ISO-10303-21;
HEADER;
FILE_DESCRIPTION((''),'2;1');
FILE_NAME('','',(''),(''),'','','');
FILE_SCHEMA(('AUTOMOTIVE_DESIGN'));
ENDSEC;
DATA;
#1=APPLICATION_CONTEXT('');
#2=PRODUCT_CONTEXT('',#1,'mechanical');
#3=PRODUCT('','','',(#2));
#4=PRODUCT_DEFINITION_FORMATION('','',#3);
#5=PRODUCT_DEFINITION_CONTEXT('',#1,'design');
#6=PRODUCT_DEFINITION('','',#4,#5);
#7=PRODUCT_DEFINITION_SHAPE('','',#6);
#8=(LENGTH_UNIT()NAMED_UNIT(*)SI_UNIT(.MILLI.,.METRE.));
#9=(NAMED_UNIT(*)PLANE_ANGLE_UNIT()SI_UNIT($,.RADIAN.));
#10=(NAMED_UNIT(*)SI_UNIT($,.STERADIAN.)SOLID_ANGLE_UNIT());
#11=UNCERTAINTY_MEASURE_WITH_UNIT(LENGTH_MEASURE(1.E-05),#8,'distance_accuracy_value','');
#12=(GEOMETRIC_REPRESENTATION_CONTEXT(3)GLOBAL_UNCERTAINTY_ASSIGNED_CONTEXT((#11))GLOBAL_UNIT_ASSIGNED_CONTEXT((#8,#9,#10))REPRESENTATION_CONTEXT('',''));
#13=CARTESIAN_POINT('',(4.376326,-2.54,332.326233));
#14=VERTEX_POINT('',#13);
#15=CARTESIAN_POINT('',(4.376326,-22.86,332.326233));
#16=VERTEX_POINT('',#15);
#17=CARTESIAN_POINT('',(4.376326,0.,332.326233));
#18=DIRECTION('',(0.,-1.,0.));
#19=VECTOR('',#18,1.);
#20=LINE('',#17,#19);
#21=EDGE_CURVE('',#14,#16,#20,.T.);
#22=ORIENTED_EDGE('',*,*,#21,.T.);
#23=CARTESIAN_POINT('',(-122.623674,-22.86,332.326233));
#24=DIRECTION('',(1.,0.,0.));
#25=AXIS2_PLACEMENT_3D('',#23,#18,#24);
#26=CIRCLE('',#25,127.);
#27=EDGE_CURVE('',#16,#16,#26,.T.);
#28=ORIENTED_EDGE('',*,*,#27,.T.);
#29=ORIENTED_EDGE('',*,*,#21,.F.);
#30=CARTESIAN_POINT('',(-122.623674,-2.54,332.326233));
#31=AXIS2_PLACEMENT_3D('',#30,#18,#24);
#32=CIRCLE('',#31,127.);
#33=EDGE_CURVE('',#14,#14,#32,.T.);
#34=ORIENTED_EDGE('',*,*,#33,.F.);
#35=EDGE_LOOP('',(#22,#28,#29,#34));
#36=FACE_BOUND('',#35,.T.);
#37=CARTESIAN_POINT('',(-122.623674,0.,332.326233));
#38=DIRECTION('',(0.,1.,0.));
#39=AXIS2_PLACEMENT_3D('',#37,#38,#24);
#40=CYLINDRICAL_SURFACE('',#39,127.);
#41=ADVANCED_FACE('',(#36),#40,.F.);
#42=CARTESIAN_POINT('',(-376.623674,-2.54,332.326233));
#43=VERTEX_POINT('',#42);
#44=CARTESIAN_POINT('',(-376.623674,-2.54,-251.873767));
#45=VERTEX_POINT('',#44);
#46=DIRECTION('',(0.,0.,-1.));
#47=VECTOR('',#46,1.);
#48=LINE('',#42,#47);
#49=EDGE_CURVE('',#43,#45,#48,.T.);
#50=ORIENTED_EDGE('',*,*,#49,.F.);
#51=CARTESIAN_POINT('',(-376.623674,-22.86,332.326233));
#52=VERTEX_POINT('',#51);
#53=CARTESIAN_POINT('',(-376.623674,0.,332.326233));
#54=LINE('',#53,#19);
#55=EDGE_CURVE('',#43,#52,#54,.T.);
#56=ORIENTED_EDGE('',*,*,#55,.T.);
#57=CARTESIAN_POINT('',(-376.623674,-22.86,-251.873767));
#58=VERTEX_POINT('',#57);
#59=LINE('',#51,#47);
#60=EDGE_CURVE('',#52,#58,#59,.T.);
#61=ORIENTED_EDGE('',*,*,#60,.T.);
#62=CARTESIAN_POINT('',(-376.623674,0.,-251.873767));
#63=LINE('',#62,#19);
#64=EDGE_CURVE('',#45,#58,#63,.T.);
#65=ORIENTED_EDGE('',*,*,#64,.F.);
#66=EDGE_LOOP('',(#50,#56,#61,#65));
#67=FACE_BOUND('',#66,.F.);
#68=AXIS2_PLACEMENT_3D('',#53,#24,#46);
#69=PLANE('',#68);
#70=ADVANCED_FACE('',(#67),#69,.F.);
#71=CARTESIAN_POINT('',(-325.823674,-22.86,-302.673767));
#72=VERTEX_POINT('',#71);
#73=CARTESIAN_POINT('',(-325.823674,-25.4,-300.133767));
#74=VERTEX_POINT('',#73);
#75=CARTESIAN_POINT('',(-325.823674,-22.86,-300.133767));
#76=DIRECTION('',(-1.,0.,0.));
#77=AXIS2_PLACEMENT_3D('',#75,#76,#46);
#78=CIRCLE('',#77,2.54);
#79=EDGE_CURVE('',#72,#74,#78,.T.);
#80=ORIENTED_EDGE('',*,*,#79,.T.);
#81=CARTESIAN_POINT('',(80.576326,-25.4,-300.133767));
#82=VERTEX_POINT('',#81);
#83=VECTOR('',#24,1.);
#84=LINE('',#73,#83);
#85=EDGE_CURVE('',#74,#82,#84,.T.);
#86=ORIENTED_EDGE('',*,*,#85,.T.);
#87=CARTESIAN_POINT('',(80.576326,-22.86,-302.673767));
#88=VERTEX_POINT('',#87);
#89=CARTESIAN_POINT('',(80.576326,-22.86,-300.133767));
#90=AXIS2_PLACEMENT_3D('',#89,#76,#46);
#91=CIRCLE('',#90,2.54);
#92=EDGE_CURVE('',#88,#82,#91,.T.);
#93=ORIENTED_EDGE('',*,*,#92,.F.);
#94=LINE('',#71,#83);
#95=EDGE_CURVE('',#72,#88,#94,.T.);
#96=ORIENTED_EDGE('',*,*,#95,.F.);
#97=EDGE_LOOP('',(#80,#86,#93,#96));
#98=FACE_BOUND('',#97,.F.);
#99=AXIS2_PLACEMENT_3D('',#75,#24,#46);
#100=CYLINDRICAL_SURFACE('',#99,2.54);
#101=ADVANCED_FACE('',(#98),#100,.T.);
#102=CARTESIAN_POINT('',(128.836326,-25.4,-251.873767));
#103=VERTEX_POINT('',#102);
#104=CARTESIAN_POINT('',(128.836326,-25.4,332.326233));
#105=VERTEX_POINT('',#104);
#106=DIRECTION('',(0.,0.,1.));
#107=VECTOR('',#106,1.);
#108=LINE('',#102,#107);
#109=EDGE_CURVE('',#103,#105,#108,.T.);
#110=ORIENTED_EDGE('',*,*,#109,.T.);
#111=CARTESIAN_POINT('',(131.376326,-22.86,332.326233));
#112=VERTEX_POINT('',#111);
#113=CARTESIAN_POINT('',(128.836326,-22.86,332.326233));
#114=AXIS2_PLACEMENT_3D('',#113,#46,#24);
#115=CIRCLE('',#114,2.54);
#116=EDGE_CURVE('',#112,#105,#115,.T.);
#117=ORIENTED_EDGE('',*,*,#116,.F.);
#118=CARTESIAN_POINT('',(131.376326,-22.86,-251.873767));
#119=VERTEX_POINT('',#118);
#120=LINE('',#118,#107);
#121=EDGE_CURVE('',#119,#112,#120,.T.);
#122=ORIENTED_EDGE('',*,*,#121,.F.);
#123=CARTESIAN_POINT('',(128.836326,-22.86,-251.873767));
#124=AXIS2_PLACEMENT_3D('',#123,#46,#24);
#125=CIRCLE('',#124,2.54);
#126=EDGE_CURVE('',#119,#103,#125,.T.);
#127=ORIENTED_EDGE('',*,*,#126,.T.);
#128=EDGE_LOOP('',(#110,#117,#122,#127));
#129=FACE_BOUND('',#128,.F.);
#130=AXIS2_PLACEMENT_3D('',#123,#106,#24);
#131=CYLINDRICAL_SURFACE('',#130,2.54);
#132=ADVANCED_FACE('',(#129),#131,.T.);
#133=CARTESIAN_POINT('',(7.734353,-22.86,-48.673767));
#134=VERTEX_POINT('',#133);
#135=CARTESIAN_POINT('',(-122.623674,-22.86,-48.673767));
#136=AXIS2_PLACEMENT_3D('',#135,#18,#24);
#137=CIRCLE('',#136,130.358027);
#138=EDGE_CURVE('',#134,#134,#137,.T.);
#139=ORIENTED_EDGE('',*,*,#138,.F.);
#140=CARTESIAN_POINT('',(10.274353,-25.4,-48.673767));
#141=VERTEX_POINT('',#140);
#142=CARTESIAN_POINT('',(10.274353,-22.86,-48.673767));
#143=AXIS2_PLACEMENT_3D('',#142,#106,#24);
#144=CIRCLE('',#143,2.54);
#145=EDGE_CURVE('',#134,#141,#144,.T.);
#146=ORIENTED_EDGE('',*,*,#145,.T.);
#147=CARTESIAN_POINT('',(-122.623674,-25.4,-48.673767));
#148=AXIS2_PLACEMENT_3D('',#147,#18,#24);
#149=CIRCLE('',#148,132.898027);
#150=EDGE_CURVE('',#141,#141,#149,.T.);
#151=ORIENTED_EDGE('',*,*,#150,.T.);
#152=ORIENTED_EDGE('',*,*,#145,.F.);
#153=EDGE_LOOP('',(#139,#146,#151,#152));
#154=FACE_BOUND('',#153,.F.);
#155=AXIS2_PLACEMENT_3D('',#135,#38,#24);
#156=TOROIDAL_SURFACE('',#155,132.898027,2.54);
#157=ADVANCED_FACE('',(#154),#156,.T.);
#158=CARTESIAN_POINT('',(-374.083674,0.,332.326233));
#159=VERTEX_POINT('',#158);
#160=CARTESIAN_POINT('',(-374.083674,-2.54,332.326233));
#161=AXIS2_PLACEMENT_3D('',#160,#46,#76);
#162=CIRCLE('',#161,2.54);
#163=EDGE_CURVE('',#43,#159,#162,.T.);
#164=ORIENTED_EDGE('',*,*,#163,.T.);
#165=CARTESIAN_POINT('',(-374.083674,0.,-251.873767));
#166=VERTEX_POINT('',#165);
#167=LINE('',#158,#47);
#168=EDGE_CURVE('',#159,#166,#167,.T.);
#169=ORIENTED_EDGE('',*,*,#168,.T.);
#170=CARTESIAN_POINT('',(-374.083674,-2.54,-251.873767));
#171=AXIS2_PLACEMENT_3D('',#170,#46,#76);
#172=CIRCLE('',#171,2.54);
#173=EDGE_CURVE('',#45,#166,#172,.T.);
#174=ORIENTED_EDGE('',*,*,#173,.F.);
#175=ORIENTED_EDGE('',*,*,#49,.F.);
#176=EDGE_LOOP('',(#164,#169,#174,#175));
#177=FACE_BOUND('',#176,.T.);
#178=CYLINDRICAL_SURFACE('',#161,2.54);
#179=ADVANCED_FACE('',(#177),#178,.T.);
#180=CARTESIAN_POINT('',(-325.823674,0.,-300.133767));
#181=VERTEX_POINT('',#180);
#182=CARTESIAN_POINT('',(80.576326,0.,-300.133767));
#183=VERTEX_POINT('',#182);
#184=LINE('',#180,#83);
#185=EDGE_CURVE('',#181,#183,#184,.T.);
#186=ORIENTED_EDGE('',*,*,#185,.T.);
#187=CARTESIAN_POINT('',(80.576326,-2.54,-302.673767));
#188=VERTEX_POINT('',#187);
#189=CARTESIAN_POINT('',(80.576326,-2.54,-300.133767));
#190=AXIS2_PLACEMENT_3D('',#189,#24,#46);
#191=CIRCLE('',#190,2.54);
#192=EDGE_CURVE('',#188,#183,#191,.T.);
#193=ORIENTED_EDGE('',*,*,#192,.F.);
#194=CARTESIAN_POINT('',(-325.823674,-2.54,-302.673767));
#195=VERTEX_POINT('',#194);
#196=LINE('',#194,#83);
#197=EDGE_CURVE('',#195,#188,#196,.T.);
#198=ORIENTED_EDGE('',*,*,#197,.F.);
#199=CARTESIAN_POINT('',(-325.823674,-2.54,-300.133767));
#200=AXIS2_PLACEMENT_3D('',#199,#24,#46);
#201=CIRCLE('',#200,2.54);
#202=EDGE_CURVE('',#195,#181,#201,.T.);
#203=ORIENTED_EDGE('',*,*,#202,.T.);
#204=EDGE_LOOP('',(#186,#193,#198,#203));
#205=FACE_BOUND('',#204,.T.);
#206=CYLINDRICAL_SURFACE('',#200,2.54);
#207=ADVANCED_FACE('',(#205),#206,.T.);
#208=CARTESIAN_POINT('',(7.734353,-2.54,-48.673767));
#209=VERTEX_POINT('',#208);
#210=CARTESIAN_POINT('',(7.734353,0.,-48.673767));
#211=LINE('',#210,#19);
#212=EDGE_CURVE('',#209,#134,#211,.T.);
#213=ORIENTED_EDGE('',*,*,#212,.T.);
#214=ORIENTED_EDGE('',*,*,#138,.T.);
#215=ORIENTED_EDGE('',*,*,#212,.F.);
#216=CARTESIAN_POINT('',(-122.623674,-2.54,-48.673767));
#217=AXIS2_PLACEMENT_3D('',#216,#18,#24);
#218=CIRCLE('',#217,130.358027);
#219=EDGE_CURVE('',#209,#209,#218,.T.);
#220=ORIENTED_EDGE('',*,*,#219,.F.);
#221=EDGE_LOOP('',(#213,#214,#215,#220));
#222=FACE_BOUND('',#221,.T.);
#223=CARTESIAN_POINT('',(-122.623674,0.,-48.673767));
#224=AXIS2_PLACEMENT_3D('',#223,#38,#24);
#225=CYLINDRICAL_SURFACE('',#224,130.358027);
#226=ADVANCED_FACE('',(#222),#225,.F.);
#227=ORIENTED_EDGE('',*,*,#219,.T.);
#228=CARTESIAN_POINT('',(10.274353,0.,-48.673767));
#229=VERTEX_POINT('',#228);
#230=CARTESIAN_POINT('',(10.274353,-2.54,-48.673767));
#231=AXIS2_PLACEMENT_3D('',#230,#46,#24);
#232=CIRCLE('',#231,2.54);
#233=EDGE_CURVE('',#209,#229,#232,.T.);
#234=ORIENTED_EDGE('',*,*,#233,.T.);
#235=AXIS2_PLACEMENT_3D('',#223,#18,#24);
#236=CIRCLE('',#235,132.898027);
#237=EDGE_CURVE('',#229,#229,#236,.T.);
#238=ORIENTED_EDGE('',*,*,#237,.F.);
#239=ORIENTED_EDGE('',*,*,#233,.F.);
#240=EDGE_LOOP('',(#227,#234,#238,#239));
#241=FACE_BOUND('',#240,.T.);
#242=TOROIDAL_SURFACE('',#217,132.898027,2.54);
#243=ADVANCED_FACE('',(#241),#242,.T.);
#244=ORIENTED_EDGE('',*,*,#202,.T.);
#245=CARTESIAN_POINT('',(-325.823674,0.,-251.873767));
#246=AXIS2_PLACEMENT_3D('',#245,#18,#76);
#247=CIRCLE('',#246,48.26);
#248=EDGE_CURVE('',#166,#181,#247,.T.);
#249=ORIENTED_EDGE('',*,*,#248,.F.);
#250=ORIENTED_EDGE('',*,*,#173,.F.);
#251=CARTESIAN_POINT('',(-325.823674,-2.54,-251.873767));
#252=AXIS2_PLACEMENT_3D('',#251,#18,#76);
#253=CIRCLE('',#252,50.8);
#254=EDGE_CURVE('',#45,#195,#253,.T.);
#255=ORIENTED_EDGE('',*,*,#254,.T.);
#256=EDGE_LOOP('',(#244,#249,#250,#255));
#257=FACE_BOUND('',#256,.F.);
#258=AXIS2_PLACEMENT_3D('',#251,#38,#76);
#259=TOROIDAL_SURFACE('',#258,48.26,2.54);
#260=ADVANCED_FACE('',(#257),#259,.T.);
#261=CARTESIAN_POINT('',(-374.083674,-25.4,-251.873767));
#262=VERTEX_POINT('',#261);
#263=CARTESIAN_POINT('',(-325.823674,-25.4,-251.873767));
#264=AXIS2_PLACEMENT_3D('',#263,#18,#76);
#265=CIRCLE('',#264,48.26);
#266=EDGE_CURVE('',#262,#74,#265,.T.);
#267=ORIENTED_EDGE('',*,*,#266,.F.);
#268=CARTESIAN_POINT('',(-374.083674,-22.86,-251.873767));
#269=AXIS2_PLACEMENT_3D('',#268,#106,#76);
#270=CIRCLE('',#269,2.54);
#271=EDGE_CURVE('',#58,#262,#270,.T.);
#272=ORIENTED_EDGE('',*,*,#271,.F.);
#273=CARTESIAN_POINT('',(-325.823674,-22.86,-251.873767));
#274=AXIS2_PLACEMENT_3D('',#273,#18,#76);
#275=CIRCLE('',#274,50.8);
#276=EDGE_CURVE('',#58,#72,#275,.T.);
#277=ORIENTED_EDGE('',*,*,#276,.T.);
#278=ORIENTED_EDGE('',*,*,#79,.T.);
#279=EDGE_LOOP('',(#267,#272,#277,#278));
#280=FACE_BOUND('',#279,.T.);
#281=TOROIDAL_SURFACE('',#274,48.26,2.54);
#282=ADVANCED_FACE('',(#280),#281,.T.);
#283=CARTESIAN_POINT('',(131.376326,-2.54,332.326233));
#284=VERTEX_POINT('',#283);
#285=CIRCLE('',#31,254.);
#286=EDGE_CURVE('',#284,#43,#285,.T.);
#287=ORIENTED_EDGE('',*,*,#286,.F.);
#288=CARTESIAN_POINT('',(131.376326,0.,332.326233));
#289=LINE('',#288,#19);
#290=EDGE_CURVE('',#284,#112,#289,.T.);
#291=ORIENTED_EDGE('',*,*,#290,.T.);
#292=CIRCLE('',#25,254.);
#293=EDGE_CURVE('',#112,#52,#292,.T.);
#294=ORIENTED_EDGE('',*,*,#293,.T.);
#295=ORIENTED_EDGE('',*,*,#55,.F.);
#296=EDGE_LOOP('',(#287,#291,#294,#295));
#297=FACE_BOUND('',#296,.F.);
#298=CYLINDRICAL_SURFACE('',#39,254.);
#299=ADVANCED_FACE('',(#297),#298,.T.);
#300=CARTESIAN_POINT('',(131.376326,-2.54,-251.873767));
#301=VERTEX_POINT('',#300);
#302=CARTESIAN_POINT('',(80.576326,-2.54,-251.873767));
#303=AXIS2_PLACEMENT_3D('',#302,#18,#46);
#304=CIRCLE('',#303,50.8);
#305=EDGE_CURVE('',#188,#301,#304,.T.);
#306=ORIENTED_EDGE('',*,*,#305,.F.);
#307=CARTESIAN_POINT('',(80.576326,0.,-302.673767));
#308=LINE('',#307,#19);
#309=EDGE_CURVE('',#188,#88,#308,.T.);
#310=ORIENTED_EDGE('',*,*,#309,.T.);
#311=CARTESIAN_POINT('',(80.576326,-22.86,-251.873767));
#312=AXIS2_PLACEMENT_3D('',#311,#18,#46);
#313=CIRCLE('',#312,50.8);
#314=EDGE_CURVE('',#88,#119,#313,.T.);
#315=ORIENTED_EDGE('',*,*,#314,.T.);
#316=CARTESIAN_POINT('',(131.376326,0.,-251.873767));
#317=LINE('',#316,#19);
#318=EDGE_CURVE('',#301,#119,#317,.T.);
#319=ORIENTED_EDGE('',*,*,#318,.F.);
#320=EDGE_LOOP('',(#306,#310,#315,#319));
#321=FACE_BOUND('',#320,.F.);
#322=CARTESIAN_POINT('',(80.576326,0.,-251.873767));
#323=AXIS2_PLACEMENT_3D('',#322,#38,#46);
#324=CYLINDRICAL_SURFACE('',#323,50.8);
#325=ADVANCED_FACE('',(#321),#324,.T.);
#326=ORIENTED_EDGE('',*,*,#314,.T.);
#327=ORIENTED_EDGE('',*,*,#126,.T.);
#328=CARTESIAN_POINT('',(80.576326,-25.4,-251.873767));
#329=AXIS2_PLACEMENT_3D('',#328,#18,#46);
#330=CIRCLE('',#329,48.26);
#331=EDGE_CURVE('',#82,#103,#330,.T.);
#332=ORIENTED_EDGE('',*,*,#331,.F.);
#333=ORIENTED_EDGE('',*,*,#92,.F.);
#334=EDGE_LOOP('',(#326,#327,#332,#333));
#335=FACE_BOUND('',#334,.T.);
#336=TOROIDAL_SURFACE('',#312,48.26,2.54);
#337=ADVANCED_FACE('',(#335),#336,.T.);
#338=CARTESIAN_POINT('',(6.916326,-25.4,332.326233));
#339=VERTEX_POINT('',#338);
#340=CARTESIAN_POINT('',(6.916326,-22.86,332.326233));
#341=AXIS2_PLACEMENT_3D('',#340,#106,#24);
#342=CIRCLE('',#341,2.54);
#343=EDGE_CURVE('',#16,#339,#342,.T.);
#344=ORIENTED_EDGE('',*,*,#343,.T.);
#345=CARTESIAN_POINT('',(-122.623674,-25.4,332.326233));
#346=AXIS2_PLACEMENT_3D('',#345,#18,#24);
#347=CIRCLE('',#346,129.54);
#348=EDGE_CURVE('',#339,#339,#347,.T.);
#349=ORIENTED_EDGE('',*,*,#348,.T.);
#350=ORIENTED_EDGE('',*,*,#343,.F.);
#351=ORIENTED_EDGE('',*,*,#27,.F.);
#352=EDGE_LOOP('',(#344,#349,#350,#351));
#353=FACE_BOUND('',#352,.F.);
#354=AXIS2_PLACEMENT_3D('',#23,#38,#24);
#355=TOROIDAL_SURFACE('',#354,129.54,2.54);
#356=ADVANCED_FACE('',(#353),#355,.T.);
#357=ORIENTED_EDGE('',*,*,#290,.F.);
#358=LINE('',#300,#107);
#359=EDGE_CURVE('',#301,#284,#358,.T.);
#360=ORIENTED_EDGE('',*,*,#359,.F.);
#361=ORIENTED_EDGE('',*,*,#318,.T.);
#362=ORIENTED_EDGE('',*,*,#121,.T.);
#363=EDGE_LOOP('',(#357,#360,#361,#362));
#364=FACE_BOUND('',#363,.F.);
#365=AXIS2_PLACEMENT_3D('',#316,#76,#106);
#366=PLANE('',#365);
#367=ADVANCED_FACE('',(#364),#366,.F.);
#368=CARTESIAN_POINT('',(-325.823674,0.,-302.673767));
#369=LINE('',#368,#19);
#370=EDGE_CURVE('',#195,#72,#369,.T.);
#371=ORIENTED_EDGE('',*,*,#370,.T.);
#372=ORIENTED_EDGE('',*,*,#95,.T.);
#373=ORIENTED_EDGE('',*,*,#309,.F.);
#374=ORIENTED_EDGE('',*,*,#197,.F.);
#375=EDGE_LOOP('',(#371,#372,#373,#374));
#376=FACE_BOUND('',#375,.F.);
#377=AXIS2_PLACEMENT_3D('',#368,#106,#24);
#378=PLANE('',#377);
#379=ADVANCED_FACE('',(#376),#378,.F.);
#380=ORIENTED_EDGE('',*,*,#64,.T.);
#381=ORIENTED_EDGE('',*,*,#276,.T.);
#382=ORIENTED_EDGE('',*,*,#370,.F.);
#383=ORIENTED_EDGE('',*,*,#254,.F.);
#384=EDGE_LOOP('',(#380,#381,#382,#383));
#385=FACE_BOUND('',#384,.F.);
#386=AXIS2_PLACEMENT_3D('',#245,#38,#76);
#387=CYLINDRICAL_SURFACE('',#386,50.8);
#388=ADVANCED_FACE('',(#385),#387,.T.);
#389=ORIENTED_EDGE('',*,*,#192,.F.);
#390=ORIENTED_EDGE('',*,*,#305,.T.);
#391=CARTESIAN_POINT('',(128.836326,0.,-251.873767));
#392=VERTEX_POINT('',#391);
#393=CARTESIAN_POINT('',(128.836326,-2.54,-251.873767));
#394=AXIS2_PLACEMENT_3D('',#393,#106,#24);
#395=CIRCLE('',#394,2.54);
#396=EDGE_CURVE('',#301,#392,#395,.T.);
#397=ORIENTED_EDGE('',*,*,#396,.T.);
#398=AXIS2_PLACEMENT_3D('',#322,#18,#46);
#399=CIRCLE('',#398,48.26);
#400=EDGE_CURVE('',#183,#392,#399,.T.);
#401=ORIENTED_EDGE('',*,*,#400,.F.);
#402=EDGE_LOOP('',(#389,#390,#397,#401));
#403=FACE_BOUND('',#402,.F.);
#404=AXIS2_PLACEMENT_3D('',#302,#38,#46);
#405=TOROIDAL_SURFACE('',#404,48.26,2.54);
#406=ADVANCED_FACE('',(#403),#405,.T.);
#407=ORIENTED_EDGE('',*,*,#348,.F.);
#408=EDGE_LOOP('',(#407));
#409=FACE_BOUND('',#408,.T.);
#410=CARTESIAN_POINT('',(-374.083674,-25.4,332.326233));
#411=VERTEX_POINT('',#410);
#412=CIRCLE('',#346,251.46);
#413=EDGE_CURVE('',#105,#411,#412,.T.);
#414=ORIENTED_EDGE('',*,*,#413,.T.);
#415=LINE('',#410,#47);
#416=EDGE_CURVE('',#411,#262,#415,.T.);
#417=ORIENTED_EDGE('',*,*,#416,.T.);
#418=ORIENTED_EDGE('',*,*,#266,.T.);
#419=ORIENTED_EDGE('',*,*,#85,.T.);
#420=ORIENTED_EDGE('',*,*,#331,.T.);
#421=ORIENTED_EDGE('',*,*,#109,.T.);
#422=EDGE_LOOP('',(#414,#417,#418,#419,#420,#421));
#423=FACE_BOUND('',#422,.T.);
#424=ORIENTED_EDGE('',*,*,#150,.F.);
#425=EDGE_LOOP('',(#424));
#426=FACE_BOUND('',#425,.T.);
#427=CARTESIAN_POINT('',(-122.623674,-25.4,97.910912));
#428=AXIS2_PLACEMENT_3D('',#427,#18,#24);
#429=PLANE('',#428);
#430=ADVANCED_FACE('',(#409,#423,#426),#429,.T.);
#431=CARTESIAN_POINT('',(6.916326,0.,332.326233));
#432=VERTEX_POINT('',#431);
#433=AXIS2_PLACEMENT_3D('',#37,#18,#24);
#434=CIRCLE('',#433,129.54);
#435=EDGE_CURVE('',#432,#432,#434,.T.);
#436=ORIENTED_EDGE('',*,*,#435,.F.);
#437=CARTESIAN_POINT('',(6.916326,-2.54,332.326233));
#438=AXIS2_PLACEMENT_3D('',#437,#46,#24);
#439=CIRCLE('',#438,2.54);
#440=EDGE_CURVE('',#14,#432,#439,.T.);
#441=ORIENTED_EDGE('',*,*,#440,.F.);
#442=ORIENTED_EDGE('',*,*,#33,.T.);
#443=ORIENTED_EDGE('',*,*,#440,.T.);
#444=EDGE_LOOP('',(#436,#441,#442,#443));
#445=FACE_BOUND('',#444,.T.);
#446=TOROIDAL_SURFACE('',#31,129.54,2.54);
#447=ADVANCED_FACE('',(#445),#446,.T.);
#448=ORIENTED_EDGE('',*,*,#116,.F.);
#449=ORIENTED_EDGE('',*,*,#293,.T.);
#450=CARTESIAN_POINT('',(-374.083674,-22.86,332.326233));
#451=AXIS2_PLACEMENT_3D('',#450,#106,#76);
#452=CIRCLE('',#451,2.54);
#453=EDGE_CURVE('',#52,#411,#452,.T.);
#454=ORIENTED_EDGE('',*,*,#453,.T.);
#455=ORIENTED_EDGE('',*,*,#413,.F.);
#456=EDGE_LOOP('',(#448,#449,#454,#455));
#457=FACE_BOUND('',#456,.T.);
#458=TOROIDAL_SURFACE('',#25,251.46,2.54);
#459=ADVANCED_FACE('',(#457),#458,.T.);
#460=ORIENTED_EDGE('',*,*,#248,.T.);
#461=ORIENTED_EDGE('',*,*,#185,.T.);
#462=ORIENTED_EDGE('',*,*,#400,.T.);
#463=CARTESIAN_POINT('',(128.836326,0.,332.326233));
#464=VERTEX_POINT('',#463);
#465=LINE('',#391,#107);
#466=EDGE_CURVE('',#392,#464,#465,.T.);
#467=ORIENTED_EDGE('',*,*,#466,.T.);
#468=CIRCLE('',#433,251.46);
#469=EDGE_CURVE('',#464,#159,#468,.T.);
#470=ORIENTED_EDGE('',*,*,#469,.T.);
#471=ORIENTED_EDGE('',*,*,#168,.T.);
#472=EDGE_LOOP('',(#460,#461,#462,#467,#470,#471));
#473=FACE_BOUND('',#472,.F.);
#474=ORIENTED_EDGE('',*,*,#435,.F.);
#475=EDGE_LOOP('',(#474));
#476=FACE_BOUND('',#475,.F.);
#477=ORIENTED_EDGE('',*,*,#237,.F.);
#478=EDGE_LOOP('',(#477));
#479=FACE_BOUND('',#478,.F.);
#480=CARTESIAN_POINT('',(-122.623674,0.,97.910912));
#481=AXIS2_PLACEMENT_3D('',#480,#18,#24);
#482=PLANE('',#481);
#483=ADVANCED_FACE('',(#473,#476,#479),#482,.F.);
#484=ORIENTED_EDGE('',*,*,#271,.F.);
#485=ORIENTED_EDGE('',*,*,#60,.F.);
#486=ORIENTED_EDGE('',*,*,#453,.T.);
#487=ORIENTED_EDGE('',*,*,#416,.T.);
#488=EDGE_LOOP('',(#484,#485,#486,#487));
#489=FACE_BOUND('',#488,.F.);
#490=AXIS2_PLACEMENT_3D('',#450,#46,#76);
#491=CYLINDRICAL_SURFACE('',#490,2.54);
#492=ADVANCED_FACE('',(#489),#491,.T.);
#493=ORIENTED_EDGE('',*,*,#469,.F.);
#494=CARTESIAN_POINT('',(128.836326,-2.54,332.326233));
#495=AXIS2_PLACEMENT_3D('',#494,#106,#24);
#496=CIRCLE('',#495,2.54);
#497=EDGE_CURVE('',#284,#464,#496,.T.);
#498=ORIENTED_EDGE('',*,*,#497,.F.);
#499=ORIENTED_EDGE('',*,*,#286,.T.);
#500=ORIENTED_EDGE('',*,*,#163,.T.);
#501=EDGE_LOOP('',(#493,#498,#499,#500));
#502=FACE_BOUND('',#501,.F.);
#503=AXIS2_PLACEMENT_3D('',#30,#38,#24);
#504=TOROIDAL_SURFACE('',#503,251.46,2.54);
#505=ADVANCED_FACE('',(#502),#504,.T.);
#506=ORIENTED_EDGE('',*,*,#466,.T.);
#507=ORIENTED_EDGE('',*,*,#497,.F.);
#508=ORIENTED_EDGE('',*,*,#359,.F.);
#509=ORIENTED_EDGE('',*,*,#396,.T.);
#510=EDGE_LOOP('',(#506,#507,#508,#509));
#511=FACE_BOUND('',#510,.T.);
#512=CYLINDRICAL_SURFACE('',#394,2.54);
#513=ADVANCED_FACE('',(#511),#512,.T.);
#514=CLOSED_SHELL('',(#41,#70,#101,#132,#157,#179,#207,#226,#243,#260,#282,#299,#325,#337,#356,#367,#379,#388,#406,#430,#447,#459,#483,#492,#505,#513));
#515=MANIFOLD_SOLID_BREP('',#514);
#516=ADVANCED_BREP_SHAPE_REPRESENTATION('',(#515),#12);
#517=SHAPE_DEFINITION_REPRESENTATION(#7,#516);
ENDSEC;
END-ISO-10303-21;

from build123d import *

# Parameters (mm, degrees)
F0_R     = 130.3580265026
F0_R_2   = 127
F1_DEPTH = 25.4
F2_R     = 2.54


# Not quite as in the source:
# - a feature names something its author has since deleted; it is built from what else it names


with BuildPart() as f1:
    # F0 (on Front) → F1 (new body)
    with BuildSketch(Plane.XZ):
        with BuildLine():
            ThreePointArc((-376.6236739159, -251.8737668991), (-361.7446984001, -287.7947913834), (-325.8236739159, -302.6737668991))
            Line((-325.8236739159, -302.6737668991), (80.5763260841, -302.6737668991))
            ThreePointArc((80.5763260841, -302.6737668991), (116.4973505684, -287.7947913834), (131.3763260841, -251.8737668991))
            Line((131.3763260841, -251.8737668991), (131.3763260841, 332.3262331009))
            ThreePointArc((131.3763260841, 332.3262331009), (56.9814485055, 511.9313555223), (-122.6236739159, 586.3262331009))
            ThreePointArc((-122.6236739159, 586.3262331009), (-302.2287963372, 511.9313555223), (-376.6236739159, 332.3262331009))
            Line((-376.6236739159, 332.3262331009), (-376.6236739159, -251.8737668991))
        make_face()
        with Locations((-122.6236739159, -48.6737668991)):
            Circle(F0_R, mode=Mode.SUBTRACT)
        with Locations((-122.6236739159, 332.3262331009)):
            Circle(F0_R_2, mode=Mode.SUBTRACT)
    extrude(amount=F1_DEPTH)

    # F2
    f2_edges = [f1.edges().sort_by_distance(p)[0] for p in [
        (131.376326, -25.4, 40.226233),
        (-122.623674, -25.4, -302.673767),
        (-376.623674, -25.4, 40.226233),
        (-122.623674, -25.4, 586.326233),
        (-249.623674, -25.4, 332.326233),
        (-249.623674, 0, 332.326233),
        (-376.623674, 0, 40.226233),
        (-122.623674, 0, 586.326233),
        (131.376326, 0, 40.226233),
        (-122.623674, 0, -302.673767),
        (-361.744698, 0, -287.794791),
        (116.497351, 0, -287.794791),
        (-252.9817, 0, -48.673767),
        (7.734353, -12.7, -48.673767),
        (-252.9817, -25.4, -48.673767),
        (-376.623674, -12.7, -251.873767),
        (-325.823674, -12.7, -302.673767),
        (-361.744698, -25.4, -287.794791),
        (116.497351, -25.4, -287.794791),
    ]]
    fillet(f2_edges, radius=F2_R)


solid = f1.part
